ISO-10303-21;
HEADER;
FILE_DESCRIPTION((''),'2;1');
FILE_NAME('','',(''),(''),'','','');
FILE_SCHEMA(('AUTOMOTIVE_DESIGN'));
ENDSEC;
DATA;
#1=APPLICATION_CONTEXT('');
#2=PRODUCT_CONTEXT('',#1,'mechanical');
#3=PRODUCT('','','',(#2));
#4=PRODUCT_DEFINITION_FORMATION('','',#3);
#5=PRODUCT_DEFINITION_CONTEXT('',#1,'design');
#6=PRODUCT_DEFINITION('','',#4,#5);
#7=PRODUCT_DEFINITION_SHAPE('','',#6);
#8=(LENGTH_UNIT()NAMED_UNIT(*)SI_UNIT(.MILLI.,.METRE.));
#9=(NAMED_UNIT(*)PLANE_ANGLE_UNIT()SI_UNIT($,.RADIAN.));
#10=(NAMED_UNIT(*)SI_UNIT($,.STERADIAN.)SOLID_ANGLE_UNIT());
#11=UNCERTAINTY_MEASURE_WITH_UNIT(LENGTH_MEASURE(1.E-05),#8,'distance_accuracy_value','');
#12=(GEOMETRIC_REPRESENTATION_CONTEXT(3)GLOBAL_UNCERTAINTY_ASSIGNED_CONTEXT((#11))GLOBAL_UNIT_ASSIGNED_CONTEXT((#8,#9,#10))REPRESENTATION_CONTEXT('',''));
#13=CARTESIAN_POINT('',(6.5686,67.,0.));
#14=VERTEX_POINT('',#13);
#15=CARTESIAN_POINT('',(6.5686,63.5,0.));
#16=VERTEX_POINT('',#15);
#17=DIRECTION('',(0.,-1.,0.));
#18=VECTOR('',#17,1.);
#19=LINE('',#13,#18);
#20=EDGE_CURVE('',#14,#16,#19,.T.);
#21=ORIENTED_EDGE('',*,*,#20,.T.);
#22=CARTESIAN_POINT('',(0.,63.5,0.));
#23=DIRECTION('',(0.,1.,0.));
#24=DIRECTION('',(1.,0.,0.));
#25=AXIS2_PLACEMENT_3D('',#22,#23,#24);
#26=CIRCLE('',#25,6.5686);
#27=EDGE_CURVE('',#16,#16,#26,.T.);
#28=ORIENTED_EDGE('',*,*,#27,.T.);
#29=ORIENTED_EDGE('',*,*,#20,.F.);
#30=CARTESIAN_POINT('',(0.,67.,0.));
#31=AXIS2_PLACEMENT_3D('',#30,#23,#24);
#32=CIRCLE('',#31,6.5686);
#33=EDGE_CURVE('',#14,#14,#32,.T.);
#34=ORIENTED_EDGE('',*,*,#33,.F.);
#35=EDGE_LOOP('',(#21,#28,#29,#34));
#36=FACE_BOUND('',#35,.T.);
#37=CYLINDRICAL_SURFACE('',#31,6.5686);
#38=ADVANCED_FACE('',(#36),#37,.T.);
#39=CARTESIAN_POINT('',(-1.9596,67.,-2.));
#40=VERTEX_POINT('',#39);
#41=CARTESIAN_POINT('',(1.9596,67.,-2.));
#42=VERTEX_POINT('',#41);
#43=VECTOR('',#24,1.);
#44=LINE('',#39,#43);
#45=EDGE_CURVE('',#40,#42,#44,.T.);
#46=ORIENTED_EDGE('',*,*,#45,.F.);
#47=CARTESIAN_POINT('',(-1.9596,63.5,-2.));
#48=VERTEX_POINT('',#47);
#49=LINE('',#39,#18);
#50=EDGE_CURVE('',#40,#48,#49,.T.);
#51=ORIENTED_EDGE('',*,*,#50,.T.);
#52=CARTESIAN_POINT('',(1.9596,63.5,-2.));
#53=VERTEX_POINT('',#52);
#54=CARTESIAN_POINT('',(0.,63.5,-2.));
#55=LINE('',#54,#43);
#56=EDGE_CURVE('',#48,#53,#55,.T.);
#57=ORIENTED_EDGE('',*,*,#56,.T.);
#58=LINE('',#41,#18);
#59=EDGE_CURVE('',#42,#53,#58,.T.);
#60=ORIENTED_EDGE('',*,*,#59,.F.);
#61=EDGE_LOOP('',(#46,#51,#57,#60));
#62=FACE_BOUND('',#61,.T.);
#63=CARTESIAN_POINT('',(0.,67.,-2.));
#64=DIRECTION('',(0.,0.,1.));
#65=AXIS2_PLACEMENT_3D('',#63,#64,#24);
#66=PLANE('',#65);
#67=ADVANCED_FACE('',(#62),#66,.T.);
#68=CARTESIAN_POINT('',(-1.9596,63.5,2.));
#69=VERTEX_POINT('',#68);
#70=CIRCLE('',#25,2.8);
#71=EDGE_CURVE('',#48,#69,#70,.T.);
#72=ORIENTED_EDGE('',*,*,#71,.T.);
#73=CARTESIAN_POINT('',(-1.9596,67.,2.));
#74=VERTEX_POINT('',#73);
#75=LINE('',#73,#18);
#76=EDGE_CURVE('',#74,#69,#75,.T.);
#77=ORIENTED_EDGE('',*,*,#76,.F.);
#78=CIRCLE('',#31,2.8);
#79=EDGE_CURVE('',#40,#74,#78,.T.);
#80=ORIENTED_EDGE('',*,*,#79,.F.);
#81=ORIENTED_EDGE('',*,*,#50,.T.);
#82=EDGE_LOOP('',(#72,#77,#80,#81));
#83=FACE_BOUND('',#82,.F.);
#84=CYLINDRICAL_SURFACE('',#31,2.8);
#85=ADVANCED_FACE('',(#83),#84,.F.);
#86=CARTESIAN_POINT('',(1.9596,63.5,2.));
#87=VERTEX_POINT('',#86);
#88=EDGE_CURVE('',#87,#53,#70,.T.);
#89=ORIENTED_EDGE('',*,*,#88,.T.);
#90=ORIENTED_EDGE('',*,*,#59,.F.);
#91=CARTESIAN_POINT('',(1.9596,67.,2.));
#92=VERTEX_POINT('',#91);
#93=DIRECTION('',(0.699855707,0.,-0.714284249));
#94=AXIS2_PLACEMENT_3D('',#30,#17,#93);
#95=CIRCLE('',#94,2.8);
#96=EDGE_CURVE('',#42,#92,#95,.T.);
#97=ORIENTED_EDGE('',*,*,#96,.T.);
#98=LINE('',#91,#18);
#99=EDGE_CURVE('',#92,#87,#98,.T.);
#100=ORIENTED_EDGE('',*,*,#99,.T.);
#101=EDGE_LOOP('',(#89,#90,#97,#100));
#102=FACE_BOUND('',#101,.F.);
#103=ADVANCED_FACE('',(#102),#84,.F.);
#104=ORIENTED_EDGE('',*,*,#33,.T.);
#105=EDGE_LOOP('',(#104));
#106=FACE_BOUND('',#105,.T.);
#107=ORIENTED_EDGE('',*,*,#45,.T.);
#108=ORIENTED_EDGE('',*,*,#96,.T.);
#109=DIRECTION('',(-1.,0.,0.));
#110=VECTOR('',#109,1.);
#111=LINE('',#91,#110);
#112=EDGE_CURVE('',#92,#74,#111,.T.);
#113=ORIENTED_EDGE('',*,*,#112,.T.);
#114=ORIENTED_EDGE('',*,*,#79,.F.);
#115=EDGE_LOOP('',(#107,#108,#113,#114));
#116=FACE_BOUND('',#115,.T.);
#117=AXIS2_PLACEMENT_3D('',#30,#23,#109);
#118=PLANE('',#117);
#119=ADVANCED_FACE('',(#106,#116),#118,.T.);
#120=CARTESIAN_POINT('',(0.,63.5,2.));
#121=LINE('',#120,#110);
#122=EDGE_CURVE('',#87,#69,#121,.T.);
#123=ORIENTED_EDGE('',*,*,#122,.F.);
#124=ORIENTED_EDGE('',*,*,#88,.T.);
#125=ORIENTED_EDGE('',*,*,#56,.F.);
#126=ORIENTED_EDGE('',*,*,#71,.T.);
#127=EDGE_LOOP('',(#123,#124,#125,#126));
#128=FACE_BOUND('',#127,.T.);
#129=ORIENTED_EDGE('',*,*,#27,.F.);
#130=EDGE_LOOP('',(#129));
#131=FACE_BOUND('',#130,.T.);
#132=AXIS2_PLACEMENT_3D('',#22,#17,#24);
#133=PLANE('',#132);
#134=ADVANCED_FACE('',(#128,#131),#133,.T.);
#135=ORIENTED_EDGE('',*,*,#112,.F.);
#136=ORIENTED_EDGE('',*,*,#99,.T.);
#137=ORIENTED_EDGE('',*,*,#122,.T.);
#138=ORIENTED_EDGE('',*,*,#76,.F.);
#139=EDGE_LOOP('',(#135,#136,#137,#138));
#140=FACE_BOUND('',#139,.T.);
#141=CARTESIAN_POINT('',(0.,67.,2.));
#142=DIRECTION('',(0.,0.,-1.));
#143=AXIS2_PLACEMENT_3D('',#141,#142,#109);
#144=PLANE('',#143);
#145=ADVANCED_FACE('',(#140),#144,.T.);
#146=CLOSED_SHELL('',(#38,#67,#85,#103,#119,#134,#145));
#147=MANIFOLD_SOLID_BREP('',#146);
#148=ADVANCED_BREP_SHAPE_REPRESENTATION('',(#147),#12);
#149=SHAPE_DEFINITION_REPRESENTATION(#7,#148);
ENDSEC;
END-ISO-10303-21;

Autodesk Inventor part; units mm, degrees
ref_plane "YZ Plane" through (0, 0, 0) normal (1, 0, 0) x (0, 1, 0)
ref_plane "XZ Plane" through (0, 0, 0) normal (0, 1, 0) x (-1, 0, 0)
ref_plane "XY Plane" through (0, 0, 0) normal (0, 0, 1) x (1, 0, 0)
sketch "Sketch1" plane through (0, 0, 0) normal (0, 1, 0) x (-1, 0, 0)
  circle A0 centre (0, 0) radius 19.05
  dimension "d0" = 38.1
extrude "Extrusion1" add sketch "Sketch1" along normal blind 67
sketch "Sketch2" plane through (0, 0, 0) normal (0, -1, 0) x (1, 0, 0)
  circle A0 centre (0, 0) radius 11.025
  dimension "d3" = 22.05
extrude "Extrusion2" cut sketch "Sketch2" against normal blind 7
ref_plane "Work Plane1" through (0, 33.5, 0) normal (0, 1, 0) x (1, 0, 0)
ref_plane "Work Plane2" through (0, 22, 0) normal (0, -1, 0) x (1, 0, 0)
sketch "Sketch4" plane through (0, 22, 0) normal (0, -1, 0) x (1, 0, 0)
  circle A0 centre (0, 0) radius 13.97
  dimension "d7" = 27.94
sketch "Sketch5" plane through (0, 7, 0) normal (0, -1, 0) x (1, 0, 0)
  circle A0 centre (0, 0) radius 11.025 projected
  circle A1 centre (0, 0) radius 11.025
ref_plane "Work Plane3" through (0, 2, 0) normal (0, -1, 0) x (1, 0, 0)
ref_plane "Work Plane4" through (0, 12, 0) normal (0, -1, 0) x (1, 0, 0)
sketch "Sketch8" plane through (0, 12, 0) normal (0, -1, 0) x (1, 0, 0)
  circle A0 centre (0, 0) radius 9.5
  dimension "d11" = 19
sketch "Sketch9" plane through (0, 33.5, 0) normal (0, 1, 0) x (1, 0, 0)
  circle A0 centre (0, 0) radius 13.97
  dimension "d12" = 27.94
loft "Loft1" cut profiles "Sketch5", "Sketch8", "Sketch4", "Sketch9"
mirror "Mirror1" about plane through (0, 33.5, 0) normal (0, 1, 0) of "Loft1", "Extrusion2"
sketch "Sketch10" plane through (0, 67, 0) normal (0, 1, 0) x (1, 0, 0)
  circle A0 centre (0, 0) radius 16.3911
extrude "Extrusion3" add sketch "Sketch10" against normal blind 12.7
sketch "Sketch12" plane through (0, 67, 0) normal (0, 1, 0) x (1, 0, 0)
  circle A0 centre (0, 0) radius 2.8
  line L0 (0, 0) -> (0, 2) construction
  line L1 (0, 0) -> (0, -2) construction
  line L2 (0, 2) -> (-1.9596, 2)
  line L3 (0, 2) -> (1.9596, 2)
  line L4 (0, -2) -> (-1.9596, -2)
  line L5 (0, -2) -> (1.9596, -2)
  dimension "d23" = 5.6
  dimension "d24" = 2
  dimension "d25" = 2
extrude "Extrusion4" cut sketch "Sketch12" against normal blind 10 contours A0 L5 L4 L2 L3
sketch "Sketch13" plane through (0, 0, 0) normal (0, -1, 0) x (1, 0, 0)
  circle A0 centre (0, 0) radius 13.97 projected
  circle A1 centre (0, 0) radius 28.9364
  point P0 (13.97, 0)
extrude "Extrusion5" cut sketch "Sketch13" against normal blind 63.5 contours A0 | A1
sketch "Sketch14" plane through (0, 67, 0) normal (0, 1, 0) x (1, 0, 0)
  arc A0 (1.9596, -2) -> (1.9596, 2) centre (0, 0) ccw projected
  circle A1 centre (0, 0) radius 6.5686
  circle A2 centre (0, 0) radius 30.6019
extrude "Extrusion6" cut sketch "Sketch14" against normal blind 63.5
properties part number "motor fit test"
